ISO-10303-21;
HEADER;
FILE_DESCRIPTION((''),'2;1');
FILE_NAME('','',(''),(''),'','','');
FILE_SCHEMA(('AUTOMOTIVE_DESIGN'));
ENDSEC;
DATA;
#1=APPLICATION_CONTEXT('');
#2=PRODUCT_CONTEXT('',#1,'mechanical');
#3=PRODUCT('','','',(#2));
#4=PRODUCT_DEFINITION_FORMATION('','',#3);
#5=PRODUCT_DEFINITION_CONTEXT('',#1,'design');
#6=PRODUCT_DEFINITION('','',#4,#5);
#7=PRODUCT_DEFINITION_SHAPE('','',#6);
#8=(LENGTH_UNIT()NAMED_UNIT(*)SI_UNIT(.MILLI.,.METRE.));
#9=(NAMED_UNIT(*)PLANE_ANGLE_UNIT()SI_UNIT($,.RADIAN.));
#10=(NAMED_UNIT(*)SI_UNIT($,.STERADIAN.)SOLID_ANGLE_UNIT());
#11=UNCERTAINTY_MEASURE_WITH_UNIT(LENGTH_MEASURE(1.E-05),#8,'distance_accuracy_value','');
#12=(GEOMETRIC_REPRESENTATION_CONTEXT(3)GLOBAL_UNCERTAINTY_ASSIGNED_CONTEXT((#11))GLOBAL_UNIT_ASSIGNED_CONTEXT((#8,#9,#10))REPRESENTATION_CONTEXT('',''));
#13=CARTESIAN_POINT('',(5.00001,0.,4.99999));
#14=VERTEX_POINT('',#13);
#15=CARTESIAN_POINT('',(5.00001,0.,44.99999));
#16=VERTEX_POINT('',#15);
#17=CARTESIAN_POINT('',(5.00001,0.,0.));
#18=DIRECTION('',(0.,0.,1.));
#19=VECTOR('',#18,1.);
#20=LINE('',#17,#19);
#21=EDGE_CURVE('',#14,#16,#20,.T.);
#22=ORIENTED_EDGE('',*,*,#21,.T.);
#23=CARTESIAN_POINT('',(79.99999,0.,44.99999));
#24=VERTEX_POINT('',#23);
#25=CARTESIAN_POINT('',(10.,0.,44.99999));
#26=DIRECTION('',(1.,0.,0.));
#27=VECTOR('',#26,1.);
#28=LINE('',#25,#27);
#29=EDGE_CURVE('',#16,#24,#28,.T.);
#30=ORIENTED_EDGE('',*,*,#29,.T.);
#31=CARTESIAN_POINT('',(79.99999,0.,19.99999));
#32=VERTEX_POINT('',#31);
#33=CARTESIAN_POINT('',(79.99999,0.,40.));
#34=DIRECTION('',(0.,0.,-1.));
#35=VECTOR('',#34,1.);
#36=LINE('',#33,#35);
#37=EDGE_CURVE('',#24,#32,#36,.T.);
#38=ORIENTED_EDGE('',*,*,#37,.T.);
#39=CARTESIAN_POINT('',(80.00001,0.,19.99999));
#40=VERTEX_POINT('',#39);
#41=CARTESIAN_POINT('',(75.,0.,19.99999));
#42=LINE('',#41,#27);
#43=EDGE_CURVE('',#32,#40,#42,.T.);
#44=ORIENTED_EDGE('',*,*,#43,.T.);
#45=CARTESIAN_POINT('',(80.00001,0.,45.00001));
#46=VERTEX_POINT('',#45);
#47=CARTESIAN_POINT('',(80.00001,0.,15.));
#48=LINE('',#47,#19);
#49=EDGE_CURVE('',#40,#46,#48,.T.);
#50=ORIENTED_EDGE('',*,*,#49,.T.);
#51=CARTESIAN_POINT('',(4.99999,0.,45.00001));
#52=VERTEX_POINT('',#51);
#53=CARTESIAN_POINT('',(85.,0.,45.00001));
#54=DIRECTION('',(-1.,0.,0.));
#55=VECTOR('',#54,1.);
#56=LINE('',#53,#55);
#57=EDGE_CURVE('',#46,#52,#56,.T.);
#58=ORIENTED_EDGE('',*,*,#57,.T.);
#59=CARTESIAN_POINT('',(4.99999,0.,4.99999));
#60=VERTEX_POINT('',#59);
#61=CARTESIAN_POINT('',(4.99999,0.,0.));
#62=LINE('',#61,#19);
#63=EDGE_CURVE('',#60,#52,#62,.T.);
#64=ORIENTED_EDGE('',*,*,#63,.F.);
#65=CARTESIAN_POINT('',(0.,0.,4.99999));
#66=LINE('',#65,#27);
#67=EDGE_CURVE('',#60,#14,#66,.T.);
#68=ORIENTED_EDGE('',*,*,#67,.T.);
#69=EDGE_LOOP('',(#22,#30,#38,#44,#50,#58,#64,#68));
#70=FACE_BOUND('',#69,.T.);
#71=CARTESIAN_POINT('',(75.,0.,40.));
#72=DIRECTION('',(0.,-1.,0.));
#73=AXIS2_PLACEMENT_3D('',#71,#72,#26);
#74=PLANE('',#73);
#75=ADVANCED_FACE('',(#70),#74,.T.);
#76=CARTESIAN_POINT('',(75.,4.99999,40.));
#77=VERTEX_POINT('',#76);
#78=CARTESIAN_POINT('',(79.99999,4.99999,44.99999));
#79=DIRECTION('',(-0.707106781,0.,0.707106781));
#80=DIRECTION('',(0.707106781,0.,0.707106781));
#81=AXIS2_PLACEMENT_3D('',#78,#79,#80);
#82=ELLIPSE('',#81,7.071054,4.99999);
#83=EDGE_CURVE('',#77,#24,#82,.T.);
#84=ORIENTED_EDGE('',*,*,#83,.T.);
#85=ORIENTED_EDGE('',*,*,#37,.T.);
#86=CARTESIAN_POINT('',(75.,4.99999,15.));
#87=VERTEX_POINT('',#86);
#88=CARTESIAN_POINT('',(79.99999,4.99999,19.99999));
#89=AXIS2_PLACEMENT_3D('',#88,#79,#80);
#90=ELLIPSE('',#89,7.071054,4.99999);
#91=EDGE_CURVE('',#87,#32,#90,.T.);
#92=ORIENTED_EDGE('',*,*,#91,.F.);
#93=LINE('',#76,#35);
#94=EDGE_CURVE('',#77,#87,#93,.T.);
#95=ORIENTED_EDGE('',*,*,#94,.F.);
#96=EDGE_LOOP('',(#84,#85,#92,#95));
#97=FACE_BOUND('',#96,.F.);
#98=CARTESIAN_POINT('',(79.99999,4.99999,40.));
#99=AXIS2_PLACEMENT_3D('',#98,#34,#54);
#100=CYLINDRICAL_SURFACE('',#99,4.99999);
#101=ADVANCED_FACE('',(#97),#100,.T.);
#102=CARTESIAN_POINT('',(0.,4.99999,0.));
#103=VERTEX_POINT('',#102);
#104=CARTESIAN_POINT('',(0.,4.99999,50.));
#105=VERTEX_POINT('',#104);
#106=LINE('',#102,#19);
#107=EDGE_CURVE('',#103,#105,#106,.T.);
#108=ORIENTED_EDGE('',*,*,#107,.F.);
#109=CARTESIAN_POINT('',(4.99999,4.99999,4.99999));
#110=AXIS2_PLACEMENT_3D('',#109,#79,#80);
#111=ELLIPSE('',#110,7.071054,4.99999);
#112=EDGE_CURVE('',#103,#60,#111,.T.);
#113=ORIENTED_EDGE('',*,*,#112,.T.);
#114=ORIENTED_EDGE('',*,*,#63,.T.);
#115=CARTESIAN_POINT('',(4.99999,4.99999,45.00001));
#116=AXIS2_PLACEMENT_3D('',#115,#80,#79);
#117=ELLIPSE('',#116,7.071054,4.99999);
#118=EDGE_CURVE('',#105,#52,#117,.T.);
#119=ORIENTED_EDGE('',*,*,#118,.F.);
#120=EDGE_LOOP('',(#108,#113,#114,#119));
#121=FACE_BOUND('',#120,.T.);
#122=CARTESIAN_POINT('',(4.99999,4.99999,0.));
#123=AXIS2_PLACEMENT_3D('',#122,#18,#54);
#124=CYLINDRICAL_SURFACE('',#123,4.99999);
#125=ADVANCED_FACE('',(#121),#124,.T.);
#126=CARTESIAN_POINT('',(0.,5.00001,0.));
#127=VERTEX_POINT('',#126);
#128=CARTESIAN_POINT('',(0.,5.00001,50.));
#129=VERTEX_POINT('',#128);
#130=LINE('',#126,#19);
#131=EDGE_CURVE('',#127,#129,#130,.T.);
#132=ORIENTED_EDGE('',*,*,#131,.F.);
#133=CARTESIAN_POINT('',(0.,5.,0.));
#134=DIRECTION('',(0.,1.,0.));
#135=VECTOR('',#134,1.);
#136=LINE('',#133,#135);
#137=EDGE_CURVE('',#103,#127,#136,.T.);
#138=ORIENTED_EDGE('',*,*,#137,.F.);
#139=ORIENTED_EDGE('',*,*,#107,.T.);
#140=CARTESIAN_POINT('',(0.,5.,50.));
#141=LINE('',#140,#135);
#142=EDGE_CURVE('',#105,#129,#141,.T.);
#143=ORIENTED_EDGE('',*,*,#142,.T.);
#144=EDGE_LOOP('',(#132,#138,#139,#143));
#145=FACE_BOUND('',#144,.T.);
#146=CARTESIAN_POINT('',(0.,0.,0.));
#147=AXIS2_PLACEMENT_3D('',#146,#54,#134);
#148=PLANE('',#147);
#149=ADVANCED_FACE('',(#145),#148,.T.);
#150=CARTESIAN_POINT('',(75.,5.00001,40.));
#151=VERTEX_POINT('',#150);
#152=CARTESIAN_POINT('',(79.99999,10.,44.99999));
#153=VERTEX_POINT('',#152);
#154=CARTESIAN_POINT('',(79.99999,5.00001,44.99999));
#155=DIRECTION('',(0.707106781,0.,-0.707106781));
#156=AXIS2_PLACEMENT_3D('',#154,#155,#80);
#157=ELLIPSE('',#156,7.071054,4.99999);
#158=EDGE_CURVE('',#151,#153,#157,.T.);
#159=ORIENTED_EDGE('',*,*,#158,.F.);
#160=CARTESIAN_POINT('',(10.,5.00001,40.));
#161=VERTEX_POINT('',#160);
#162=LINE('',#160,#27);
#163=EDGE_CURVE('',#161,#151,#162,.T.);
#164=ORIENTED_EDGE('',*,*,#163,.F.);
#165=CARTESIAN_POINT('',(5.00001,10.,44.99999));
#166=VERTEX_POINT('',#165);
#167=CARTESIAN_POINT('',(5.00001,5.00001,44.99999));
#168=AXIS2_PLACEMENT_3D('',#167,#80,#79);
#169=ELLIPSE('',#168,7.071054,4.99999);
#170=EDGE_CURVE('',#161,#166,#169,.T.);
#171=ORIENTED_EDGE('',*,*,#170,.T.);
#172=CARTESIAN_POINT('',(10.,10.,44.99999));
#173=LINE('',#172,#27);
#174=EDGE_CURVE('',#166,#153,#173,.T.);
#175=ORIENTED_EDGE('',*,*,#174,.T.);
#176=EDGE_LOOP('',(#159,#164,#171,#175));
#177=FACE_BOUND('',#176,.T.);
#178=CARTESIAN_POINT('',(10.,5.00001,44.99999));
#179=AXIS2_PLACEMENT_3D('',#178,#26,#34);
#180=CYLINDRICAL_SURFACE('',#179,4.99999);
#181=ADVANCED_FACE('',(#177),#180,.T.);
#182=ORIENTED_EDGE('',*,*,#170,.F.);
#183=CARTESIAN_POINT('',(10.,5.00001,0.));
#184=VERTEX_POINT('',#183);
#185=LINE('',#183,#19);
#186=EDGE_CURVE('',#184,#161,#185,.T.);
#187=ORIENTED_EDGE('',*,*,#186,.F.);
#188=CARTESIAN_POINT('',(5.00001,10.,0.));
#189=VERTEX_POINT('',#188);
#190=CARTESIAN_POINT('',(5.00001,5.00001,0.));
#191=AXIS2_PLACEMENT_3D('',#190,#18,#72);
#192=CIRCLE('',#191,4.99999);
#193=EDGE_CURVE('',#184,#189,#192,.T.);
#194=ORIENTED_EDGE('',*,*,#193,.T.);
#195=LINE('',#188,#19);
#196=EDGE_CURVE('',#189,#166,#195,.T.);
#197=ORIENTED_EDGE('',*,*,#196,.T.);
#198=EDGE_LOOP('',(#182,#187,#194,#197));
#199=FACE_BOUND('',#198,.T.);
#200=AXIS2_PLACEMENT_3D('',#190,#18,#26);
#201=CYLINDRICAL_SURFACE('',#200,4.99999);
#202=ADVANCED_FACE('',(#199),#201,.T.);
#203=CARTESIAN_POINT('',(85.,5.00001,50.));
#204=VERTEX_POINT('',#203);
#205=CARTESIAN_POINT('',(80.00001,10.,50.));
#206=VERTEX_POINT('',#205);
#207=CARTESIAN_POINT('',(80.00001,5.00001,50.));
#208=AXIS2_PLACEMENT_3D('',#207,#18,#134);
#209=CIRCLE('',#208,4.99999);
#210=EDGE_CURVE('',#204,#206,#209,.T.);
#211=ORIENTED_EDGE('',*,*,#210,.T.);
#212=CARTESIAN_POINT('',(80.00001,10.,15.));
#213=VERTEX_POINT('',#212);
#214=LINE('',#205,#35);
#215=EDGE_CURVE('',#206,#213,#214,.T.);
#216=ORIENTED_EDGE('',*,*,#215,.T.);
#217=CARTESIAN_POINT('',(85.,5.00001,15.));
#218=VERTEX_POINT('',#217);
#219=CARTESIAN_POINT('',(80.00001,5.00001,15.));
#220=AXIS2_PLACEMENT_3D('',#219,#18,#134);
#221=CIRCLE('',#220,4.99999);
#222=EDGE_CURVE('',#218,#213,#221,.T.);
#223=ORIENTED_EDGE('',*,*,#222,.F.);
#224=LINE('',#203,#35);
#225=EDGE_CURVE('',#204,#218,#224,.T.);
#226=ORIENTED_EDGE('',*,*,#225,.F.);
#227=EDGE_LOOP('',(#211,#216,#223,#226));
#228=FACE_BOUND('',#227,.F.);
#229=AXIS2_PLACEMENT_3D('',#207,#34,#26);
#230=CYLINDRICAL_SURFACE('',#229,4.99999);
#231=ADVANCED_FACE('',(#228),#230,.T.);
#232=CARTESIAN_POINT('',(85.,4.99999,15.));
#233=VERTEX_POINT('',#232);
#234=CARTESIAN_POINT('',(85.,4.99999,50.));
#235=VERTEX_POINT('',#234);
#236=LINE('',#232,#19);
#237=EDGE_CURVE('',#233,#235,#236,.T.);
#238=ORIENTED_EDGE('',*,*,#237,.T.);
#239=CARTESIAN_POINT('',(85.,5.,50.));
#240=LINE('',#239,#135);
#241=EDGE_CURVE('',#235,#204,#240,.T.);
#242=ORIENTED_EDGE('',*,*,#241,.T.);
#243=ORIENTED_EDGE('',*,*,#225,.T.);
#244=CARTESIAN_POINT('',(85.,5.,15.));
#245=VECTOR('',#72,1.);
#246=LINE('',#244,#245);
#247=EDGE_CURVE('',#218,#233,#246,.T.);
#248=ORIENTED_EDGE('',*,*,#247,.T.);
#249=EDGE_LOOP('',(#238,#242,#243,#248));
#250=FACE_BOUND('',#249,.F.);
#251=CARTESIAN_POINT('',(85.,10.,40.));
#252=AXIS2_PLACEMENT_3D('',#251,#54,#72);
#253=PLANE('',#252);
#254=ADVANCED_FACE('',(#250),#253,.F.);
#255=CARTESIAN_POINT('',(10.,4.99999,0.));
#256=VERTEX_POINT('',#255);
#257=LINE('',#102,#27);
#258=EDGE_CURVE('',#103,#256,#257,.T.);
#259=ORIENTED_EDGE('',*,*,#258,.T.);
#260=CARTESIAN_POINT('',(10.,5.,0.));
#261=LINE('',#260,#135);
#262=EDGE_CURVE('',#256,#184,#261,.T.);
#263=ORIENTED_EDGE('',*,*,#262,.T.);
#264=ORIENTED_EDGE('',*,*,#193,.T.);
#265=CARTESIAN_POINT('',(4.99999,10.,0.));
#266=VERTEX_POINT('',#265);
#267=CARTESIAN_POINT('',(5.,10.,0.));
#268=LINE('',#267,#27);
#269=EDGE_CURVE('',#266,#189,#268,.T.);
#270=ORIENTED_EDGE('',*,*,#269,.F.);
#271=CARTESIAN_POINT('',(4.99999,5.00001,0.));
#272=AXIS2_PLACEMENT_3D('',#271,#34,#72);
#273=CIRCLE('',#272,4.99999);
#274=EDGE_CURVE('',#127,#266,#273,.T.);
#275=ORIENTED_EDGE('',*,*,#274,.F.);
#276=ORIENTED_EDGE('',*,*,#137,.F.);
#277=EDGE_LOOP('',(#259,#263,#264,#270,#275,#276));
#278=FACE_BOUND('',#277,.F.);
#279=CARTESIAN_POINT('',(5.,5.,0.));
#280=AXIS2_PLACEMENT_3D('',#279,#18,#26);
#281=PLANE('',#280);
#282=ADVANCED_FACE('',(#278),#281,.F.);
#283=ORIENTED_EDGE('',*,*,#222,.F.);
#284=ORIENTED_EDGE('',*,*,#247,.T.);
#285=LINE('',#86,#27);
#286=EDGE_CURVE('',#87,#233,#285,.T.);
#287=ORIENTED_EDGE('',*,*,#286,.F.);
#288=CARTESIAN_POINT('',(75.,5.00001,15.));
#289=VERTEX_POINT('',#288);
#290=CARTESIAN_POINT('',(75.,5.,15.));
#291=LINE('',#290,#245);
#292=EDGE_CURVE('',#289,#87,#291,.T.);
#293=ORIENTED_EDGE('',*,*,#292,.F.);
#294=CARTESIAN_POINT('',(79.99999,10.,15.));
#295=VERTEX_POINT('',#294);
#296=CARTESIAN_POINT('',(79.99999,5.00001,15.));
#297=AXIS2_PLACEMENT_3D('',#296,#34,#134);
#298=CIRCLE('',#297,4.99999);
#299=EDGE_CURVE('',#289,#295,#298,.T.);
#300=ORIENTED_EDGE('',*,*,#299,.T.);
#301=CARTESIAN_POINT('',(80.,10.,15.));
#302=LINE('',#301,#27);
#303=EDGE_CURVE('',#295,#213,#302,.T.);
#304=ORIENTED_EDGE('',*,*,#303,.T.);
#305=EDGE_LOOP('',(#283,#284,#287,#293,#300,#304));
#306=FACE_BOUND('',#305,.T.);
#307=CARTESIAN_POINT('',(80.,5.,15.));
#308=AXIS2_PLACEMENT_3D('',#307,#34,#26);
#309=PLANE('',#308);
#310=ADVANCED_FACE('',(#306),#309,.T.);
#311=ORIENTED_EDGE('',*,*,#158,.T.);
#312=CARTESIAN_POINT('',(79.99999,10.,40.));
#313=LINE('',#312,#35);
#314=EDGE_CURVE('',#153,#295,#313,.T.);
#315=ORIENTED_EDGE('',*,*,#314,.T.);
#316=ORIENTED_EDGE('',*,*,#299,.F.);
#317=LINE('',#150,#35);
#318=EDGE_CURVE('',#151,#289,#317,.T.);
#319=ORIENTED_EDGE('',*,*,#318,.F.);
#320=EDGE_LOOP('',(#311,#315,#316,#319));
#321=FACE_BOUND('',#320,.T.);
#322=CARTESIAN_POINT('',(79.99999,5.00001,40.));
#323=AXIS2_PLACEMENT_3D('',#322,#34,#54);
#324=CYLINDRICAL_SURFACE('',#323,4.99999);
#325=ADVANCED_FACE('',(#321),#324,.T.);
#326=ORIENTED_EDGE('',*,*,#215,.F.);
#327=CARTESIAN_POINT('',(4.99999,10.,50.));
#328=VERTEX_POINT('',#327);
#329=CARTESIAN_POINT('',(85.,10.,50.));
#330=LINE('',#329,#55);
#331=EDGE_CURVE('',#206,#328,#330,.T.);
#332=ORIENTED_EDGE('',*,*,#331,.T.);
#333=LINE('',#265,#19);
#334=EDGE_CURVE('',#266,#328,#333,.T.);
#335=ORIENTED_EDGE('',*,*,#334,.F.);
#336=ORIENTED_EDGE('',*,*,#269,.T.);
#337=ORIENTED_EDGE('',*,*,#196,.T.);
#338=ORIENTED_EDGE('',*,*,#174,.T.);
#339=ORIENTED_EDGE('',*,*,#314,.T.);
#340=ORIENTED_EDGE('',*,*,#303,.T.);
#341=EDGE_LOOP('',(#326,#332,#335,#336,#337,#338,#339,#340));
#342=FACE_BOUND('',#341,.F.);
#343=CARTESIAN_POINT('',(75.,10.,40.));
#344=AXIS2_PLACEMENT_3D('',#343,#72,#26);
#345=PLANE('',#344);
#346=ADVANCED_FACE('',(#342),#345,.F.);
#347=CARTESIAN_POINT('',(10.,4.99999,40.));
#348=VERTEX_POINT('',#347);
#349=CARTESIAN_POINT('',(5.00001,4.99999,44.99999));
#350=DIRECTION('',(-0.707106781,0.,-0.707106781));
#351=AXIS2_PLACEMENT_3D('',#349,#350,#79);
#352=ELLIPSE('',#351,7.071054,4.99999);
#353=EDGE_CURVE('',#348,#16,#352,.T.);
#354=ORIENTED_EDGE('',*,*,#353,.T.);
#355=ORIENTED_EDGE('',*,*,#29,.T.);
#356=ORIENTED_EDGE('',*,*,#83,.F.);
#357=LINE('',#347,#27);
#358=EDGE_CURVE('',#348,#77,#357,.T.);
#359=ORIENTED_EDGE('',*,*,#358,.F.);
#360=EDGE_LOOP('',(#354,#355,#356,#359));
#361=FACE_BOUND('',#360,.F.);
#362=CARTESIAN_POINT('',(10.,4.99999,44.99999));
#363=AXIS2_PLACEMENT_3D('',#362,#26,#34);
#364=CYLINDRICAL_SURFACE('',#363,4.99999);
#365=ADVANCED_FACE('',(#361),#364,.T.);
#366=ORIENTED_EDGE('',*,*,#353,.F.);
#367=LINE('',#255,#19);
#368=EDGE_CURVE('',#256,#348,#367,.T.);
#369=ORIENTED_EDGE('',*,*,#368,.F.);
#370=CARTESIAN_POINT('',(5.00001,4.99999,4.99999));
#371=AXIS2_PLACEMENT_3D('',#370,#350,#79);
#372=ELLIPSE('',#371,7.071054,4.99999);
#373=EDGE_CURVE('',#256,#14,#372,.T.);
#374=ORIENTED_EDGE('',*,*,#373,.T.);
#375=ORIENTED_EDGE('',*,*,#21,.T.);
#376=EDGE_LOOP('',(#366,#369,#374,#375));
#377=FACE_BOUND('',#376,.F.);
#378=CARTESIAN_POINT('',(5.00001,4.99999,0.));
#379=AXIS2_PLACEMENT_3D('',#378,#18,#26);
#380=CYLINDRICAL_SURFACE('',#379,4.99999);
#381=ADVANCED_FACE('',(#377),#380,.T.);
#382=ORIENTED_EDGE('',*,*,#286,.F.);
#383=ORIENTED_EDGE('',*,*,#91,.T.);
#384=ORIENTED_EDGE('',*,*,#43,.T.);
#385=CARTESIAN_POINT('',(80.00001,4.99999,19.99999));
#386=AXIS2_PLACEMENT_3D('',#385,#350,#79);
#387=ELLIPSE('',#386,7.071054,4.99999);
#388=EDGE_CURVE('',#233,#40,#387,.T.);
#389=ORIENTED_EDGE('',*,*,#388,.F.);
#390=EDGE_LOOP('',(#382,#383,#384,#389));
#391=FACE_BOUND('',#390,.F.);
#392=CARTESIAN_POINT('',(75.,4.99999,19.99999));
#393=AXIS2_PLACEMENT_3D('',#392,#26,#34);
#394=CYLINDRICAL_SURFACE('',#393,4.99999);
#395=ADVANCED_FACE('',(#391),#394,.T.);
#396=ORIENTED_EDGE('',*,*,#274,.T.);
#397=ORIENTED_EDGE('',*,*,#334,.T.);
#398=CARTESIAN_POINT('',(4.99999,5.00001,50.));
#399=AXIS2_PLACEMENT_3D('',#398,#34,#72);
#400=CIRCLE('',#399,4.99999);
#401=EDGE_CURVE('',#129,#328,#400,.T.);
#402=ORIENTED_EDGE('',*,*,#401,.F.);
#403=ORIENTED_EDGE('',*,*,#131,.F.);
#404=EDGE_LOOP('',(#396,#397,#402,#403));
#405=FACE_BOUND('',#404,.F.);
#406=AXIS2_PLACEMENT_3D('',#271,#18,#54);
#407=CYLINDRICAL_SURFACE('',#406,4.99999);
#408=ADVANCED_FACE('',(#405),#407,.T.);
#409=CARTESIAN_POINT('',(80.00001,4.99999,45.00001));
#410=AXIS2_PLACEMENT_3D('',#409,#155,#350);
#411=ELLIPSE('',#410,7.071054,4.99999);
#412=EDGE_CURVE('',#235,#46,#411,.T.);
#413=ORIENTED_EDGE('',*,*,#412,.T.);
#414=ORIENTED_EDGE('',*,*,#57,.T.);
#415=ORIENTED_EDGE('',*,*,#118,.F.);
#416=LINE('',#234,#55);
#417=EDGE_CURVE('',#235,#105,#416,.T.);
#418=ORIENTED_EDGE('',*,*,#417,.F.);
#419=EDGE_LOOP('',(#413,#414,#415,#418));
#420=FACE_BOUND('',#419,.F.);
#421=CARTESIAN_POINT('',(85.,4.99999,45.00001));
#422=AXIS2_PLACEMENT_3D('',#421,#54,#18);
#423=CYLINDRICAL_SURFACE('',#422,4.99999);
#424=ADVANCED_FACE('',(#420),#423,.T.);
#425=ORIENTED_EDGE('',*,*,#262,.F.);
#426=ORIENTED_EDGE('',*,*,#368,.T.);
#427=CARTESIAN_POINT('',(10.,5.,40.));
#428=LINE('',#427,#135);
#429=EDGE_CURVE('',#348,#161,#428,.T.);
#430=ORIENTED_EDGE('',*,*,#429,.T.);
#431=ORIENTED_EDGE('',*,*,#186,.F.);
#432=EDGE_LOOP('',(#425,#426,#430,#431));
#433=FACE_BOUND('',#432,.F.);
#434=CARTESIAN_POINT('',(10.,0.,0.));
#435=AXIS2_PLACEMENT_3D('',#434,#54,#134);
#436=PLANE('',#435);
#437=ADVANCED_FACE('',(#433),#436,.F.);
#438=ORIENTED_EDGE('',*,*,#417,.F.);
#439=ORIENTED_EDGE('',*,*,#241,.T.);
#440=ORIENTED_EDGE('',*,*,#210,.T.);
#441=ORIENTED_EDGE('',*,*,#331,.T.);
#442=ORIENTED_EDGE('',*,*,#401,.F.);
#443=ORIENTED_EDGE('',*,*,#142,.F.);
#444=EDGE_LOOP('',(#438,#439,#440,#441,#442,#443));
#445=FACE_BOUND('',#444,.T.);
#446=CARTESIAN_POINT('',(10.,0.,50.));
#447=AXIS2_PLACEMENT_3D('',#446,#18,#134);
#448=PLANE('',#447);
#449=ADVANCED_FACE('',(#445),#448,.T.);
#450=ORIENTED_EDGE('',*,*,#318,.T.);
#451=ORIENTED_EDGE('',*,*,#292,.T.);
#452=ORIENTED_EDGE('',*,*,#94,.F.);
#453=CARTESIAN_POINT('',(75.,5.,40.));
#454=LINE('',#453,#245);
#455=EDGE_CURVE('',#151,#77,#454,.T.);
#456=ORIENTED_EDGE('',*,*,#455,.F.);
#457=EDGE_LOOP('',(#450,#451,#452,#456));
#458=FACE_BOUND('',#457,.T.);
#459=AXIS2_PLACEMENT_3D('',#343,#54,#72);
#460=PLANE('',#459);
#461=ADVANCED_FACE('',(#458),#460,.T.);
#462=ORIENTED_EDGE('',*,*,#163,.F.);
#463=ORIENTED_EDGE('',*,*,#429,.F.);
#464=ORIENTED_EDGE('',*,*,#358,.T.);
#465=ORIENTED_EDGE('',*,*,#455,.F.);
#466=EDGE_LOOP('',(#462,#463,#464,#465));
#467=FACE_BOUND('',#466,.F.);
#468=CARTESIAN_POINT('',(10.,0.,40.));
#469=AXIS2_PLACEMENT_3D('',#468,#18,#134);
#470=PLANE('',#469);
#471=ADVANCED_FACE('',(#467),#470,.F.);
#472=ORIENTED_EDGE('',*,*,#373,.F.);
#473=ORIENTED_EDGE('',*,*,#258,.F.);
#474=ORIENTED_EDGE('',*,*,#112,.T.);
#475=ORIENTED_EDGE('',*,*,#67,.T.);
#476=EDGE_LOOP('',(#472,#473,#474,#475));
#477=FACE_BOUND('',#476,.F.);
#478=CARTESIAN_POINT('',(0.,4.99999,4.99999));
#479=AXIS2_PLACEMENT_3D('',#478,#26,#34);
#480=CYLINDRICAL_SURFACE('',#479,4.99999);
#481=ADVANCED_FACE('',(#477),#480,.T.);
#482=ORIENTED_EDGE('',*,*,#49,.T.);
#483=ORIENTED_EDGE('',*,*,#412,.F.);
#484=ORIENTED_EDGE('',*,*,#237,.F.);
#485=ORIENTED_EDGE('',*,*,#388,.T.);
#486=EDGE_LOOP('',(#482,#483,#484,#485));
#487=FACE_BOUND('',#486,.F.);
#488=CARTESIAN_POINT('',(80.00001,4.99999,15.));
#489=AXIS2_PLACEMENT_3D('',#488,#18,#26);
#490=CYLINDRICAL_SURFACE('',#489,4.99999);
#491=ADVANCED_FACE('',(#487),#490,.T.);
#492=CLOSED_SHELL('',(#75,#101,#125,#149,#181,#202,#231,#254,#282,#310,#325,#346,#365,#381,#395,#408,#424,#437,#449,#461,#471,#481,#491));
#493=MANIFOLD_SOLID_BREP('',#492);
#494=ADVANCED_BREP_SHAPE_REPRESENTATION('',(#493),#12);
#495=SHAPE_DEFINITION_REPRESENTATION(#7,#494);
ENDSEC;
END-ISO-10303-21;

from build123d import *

# Parameters (mm, degrees)
F0_W     = 10
F0_H     = 10
F1_DEPTH = 50
F2_W     = 10
F2_H     = 10
F3_DEPTH = 75
F4_W     = 10
F4_H     = 10
F5_DEPTH = 25
F6_R     = 4.99999


# Not quite as in the source:
# - a fillet or chamfer is up to 0.001 mm smaller than in the source, because OpenCascade refuses the exact size


with BuildPart() as f1:
    # F0 (on Top) → F1 (new body)
    with BuildSketch(Plane.XY):
        with Locations((5, 5)):
            Rectangle(F0_W, F0_H)
    extrude(amount=F1_DEPTH)

    # F2 (on face) → F3 (join)
    with BuildSketch(Plane.YZ.offset(10)):
        with Locations((5, 45)):
            Rectangle(F2_W, F2_H)
    extrude(amount=F3_DEPTH)

    # F4 (on face) → F5 (join)
    with BuildSketch(Plane(origin=(0, 0, 40), x_dir=(1, 0, 0), z_dir=(0, 0, -1))):
        with Locations((80, -5)):
            Rectangle(F4_W, F4_H)
    extrude(amount=F5_DEPTH)

    # F6 (radius 5 in the source; OpenCascade refuses exactly that, so slightly less here)
    f6_edges = [f1.edges().sort_by_distance(p)[0] for p in [
        (10, 0, 20),
        (0, 0, 25),
        (0, 10, 25),
        (10, 10, 20),
        (42.5, 0, 50),
        (42.5, 0, 40),
        (42.5, 10, 40),
        (85, 0, 32.5),
        (80, 0, 15),
        (75, 0, 27.5),
        (5, 0, 0),
        (85, 10, 32.5),
        (75, 10, 27.5),
    ]]
    fillet(f6_edges, radius=F6_R)


solid = f1.part
